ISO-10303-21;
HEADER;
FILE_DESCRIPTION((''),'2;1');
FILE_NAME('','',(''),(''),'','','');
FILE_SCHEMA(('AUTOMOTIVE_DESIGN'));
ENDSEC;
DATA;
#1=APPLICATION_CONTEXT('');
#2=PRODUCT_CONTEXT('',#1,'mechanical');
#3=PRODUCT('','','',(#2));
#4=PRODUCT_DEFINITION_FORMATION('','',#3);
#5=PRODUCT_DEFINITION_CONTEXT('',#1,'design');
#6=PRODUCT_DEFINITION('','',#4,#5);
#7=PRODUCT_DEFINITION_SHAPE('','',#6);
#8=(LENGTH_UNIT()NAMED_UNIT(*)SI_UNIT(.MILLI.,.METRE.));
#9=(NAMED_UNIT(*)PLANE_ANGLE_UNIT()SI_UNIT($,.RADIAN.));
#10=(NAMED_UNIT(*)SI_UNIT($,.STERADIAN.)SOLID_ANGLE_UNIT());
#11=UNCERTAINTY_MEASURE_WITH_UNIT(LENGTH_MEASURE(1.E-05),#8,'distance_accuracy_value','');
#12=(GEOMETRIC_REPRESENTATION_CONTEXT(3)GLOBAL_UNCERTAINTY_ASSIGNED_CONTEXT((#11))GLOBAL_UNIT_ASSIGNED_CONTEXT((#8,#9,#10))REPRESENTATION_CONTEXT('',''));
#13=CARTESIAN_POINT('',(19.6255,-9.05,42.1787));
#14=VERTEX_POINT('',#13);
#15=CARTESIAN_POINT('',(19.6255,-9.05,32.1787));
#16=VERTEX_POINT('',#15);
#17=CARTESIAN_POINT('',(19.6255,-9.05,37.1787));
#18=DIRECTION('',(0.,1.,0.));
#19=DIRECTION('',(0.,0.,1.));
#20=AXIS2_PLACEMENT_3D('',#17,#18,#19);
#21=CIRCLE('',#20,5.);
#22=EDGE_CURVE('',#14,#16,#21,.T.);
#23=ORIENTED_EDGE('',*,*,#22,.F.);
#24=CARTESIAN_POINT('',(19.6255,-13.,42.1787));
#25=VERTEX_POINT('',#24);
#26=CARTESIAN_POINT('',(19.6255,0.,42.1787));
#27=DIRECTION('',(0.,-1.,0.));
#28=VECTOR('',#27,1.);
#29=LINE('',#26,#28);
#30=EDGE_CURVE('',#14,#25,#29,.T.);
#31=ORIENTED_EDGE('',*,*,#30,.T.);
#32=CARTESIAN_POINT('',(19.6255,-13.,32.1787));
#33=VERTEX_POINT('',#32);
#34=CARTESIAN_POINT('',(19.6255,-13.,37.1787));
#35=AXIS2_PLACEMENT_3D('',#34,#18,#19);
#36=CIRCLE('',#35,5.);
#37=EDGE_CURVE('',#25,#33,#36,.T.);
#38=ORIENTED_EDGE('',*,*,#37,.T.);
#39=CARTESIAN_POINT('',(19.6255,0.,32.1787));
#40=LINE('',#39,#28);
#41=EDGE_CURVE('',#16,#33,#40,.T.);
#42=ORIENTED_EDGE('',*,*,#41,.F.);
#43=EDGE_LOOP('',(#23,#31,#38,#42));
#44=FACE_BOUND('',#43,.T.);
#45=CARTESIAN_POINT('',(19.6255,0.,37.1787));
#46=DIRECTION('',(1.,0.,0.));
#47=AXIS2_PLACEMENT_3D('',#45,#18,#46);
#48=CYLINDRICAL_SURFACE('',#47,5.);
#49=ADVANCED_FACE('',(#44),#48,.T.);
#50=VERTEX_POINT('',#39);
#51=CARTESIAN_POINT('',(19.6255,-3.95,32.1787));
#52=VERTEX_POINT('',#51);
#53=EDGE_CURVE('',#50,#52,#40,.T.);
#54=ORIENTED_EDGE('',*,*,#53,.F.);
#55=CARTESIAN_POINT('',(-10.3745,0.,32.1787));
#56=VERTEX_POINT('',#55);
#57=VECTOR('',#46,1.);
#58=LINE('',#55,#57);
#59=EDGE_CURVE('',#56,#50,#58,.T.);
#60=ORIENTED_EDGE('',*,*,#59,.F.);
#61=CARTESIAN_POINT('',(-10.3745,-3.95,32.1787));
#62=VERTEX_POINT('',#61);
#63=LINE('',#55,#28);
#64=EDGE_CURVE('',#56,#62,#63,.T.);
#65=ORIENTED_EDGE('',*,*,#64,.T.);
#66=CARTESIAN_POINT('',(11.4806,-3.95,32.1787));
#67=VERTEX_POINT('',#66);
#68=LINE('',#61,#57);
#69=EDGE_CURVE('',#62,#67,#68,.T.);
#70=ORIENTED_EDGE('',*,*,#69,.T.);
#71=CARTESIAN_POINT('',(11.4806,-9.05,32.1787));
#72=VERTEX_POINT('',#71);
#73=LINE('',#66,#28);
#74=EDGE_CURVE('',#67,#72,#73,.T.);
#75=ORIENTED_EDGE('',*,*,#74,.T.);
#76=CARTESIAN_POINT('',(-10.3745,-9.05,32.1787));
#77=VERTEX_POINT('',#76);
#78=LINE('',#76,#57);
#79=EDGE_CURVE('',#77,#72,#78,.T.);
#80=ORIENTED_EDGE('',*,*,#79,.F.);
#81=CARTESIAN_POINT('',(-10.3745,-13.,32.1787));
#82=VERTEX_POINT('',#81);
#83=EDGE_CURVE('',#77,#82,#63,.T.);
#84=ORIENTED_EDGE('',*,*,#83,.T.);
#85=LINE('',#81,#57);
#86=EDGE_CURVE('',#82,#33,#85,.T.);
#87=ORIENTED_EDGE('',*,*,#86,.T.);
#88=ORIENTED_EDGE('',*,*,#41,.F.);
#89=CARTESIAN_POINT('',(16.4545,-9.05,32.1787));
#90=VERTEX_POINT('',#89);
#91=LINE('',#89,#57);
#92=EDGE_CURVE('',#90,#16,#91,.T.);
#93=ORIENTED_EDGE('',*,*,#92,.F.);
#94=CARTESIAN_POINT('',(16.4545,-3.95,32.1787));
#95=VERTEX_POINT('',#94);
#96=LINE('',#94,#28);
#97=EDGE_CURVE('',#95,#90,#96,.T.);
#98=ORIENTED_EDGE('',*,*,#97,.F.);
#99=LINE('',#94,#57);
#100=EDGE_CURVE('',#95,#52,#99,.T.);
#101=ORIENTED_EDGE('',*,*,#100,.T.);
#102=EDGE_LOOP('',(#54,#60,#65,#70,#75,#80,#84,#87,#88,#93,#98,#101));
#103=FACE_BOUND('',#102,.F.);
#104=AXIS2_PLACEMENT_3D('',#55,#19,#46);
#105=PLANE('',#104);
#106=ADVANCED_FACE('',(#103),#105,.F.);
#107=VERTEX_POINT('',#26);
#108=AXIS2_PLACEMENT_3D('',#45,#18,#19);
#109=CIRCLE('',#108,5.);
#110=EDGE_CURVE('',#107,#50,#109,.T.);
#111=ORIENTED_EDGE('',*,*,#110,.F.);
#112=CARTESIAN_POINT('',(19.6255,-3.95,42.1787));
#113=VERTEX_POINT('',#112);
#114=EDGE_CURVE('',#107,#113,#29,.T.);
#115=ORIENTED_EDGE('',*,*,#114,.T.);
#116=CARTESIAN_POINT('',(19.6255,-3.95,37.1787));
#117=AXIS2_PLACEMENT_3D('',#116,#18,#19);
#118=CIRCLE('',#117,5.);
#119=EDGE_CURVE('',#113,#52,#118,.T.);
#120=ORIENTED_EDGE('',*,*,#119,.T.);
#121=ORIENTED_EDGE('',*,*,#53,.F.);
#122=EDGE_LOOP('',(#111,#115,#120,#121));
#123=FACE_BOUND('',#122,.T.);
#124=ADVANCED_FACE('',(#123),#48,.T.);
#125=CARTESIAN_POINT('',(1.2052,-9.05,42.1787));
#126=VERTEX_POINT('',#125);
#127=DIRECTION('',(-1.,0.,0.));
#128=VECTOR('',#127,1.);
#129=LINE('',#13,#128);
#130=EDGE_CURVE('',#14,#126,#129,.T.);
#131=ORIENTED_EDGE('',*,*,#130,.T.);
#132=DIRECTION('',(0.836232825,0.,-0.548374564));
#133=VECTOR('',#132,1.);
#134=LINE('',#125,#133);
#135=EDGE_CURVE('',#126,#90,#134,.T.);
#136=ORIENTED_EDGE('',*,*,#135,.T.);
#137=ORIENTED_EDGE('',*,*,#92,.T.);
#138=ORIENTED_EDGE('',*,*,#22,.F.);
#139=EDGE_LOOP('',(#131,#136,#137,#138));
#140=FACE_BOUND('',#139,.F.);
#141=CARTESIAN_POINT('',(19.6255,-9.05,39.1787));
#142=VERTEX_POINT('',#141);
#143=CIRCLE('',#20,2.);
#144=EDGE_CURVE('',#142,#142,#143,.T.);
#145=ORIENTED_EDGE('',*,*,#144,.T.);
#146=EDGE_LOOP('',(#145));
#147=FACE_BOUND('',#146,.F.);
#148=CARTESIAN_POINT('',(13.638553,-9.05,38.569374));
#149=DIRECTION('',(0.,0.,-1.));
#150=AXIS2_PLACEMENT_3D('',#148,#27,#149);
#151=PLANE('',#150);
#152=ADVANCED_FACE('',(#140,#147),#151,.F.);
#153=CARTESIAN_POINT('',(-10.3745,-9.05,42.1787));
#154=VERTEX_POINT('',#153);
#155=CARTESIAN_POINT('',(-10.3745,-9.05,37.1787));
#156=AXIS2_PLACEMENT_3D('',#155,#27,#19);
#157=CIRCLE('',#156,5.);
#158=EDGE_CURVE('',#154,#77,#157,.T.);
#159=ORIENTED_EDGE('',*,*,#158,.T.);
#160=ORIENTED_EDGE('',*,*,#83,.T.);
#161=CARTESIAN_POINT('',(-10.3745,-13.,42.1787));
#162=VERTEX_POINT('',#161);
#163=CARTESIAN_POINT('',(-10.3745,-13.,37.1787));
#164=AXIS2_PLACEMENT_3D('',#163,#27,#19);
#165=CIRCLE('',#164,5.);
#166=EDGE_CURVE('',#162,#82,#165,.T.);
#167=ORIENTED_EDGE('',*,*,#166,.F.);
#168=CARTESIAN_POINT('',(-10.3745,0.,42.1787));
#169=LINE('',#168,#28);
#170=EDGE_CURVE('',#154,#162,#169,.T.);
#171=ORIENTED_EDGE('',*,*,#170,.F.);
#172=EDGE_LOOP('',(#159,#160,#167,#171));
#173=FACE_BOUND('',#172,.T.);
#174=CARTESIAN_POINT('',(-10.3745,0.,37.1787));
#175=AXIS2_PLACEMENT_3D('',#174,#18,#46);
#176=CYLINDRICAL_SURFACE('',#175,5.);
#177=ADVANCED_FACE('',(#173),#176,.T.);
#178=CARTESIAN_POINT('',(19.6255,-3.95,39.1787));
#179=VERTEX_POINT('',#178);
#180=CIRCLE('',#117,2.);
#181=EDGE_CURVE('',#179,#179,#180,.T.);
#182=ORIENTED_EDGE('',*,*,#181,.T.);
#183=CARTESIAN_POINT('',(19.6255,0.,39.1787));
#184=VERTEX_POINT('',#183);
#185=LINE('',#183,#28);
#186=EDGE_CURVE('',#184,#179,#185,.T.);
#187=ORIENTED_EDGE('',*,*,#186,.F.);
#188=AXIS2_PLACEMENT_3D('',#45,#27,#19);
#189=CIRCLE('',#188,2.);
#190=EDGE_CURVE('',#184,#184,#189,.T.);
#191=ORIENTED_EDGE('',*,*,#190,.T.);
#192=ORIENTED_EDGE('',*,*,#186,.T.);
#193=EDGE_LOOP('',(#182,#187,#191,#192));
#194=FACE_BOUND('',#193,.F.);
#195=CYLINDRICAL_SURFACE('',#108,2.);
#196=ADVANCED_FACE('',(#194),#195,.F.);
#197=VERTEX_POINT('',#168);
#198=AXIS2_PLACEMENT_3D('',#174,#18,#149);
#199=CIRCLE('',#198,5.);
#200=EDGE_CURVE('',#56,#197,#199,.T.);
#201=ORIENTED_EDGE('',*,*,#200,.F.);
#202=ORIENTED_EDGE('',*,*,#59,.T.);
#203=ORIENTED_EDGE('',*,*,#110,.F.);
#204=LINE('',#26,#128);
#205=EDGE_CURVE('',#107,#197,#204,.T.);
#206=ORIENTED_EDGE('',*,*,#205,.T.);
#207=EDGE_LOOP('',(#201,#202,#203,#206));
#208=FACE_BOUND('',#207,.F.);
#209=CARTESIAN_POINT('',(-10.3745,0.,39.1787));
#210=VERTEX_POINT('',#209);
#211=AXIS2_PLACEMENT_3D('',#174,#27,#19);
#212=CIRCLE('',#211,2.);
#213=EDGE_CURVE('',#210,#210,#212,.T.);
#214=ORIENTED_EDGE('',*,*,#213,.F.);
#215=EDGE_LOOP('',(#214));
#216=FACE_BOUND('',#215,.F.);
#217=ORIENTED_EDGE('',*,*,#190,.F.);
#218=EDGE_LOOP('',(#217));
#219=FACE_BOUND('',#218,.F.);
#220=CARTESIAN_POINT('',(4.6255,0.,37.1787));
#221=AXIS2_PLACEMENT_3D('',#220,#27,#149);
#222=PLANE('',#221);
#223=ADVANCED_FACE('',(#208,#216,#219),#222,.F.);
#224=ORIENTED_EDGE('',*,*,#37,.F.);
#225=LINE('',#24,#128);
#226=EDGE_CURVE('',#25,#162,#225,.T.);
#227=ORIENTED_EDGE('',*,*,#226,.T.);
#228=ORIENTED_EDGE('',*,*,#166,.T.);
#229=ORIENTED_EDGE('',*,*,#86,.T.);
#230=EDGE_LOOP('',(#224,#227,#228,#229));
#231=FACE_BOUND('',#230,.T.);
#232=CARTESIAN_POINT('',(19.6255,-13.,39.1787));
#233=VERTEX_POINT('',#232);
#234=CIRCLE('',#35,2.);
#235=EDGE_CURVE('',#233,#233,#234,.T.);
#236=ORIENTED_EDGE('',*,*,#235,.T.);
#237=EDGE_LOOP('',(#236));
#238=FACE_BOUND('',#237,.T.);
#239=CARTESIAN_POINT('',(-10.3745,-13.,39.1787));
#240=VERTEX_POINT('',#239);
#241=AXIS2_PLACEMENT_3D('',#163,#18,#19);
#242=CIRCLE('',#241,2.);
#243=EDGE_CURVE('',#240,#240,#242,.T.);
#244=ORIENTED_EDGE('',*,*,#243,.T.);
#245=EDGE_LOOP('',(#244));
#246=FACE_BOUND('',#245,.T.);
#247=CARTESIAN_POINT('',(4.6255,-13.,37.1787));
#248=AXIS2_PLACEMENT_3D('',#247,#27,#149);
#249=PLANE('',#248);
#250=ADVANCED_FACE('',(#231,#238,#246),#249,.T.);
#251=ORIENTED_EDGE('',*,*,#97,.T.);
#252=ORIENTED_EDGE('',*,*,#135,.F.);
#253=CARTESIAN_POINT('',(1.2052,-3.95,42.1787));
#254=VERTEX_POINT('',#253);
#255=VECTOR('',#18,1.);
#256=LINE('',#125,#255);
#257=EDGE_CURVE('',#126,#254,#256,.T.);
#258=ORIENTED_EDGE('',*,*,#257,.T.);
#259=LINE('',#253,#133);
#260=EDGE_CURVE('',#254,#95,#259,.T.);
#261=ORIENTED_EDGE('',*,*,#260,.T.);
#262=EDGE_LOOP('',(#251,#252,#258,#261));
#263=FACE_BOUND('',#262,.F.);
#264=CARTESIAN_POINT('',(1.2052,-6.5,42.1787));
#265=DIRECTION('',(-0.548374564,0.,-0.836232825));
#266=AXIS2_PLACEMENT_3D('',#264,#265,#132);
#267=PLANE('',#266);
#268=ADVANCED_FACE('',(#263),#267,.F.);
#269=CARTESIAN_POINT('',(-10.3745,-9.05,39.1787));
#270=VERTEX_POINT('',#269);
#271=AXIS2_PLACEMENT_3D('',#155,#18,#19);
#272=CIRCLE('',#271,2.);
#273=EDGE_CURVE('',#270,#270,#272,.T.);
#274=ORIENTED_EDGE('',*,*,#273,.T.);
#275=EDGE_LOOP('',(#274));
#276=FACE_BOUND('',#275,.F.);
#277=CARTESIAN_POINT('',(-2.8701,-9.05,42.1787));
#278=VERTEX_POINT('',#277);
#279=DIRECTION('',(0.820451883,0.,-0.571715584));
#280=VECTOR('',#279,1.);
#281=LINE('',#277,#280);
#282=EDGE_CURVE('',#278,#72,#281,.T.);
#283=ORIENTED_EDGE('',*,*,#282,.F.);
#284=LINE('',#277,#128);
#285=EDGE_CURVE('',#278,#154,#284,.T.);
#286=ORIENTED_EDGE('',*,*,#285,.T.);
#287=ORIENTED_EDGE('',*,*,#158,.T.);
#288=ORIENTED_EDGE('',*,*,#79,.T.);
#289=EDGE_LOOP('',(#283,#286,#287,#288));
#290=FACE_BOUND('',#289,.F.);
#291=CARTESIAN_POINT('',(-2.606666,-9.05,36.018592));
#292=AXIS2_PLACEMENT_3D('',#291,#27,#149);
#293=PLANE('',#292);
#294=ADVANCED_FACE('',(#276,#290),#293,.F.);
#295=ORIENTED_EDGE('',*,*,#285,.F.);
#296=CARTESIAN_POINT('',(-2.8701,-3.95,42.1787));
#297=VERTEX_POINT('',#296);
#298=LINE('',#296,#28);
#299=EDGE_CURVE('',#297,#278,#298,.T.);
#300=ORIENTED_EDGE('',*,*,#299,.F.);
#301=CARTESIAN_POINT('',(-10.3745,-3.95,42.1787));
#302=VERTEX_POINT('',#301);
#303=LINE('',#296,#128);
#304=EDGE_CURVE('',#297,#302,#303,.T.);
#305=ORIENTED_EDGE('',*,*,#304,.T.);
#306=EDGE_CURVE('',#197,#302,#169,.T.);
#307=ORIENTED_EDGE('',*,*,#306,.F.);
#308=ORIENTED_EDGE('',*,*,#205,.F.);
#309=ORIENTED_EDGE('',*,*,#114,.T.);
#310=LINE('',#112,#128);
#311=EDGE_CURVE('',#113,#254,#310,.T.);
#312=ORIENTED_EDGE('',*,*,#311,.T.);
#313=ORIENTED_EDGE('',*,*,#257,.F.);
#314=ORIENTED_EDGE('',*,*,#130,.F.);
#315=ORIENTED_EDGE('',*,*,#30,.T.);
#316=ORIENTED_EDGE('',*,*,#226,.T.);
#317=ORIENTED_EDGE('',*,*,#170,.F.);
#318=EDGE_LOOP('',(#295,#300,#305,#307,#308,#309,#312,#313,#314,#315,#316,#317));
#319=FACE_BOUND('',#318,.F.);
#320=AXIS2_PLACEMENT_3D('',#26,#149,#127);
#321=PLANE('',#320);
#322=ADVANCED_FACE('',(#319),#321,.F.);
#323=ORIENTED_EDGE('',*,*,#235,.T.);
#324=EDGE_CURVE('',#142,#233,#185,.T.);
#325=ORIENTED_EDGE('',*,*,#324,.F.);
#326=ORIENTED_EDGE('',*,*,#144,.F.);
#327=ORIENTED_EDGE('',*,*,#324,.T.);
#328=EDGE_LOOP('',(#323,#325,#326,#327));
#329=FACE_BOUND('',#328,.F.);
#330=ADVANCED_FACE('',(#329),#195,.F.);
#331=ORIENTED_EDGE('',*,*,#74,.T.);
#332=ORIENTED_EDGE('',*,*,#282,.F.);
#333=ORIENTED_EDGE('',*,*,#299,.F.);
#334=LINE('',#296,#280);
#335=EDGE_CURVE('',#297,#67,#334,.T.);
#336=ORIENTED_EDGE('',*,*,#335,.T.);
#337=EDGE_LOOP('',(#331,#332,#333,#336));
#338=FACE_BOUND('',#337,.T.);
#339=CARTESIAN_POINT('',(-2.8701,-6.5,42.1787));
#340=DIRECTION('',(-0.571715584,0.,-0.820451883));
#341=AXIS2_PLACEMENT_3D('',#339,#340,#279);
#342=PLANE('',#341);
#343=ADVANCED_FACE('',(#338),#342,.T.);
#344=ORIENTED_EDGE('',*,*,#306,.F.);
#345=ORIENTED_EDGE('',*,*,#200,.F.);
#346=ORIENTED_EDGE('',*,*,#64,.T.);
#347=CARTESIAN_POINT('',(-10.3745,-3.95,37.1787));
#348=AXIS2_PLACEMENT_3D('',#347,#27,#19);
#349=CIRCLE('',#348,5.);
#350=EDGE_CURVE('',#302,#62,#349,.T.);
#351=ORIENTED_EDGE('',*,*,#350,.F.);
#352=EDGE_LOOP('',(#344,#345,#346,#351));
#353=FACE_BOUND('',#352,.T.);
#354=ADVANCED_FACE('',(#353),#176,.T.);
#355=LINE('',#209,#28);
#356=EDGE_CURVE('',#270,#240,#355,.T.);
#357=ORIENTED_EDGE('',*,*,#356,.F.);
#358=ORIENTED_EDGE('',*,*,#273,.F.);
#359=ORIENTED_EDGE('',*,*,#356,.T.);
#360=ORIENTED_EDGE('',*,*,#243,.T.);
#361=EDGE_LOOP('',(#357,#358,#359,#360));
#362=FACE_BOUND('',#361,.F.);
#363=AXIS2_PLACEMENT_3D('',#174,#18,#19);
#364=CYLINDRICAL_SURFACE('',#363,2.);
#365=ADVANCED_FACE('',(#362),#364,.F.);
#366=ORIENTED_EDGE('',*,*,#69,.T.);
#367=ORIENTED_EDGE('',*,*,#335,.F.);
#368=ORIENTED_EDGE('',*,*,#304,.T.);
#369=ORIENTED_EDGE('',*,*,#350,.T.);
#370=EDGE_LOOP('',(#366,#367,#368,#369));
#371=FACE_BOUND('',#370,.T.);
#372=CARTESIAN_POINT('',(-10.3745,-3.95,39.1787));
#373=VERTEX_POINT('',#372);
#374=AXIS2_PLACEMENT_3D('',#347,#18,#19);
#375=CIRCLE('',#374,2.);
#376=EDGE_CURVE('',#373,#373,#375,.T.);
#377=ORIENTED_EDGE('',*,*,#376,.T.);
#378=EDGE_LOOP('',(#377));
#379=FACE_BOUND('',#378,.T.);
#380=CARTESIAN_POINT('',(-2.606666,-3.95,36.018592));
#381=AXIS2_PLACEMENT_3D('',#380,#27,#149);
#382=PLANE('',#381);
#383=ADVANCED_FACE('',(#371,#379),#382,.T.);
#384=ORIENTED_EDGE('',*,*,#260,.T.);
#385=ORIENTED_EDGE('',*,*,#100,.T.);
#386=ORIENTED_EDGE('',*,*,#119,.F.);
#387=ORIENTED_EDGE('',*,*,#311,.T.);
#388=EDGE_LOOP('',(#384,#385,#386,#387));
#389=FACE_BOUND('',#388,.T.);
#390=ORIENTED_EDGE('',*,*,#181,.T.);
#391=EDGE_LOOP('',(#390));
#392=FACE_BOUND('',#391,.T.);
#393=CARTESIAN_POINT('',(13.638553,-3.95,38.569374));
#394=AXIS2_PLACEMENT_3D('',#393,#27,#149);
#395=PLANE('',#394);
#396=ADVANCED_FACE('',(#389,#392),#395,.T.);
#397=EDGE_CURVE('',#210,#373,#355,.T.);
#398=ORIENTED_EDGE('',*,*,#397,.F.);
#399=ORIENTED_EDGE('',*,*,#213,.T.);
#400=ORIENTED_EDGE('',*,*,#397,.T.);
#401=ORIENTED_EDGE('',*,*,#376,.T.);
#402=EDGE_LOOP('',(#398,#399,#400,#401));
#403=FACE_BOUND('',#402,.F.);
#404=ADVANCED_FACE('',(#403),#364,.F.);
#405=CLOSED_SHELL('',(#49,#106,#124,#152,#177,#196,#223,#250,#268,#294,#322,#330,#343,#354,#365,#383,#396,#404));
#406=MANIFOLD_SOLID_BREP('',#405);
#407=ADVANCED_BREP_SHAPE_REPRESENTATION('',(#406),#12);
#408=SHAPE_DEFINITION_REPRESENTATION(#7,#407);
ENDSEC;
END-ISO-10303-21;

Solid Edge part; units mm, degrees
sketch "Sketch1" plane through (0, 0, 0) normal (0, -1, 0) x (1, 0, 0)
  line L0 (-10.3745, 32.1787) -> (19.6255, 32.1787)
  arc A0 (19.6255, 32.1787) -> (24.6255, 37.1787) centre (19.6255, 37.1787) ccw
  arc A1 (19.6255, 42.1787) -> (24.6255, 37.1787) centre (19.6255, 37.1787) cw
  line L1 (19.6255, 42.1787) -> (-10.3745, 42.1787)
  arc A2 (-10.3745, 42.1787) -> (-15.3745, 37.1787) centre (-10.3745, 37.1787) ccw
  arc A3 (-15.3745, 37.1787) -> (-10.3745, 32.1787) centre (-10.3745, 37.1787) ccw
extrude "Protrusion1" add sketch "Sketch1" along normal blind 13
hole "Bohrung_1" at (-10.3745, 0, 37.1787) direction (0, -1, 0) diameter 4 end through all
hole "Hole1" at (19.6255, 0, 37.1787) direction (0, -1, 0) diameter 4 end through all
sketch "Sketch2" plane through (4.6255, -6.5, 37.1787) normal (0, 1, 0) x (1, 0, 0)
  line L0 (-3.4203, -5) -> (11.829, 5)
  line L1 (11.829, 5) -> (15, 5)
  arc A0 (15, 5) -> (15, -5) centre (15, 0) cw
  line L2 (15, -5) -> (-3.4203, -5)
  line L3 (-15, 5) -> (6.8551, 5)
  line L4 (-7.4956, -5) -> (6.8551, 5)
  line L5 (-7.4956, -5) -> (-15, -5)
  arc A1 (-15, -5) -> (-15, 5) centre (-15, 0) cw
extrude "Extrusionsausschnitt_2" cut sketch "Sketch2" along normal mid plane 5.1
